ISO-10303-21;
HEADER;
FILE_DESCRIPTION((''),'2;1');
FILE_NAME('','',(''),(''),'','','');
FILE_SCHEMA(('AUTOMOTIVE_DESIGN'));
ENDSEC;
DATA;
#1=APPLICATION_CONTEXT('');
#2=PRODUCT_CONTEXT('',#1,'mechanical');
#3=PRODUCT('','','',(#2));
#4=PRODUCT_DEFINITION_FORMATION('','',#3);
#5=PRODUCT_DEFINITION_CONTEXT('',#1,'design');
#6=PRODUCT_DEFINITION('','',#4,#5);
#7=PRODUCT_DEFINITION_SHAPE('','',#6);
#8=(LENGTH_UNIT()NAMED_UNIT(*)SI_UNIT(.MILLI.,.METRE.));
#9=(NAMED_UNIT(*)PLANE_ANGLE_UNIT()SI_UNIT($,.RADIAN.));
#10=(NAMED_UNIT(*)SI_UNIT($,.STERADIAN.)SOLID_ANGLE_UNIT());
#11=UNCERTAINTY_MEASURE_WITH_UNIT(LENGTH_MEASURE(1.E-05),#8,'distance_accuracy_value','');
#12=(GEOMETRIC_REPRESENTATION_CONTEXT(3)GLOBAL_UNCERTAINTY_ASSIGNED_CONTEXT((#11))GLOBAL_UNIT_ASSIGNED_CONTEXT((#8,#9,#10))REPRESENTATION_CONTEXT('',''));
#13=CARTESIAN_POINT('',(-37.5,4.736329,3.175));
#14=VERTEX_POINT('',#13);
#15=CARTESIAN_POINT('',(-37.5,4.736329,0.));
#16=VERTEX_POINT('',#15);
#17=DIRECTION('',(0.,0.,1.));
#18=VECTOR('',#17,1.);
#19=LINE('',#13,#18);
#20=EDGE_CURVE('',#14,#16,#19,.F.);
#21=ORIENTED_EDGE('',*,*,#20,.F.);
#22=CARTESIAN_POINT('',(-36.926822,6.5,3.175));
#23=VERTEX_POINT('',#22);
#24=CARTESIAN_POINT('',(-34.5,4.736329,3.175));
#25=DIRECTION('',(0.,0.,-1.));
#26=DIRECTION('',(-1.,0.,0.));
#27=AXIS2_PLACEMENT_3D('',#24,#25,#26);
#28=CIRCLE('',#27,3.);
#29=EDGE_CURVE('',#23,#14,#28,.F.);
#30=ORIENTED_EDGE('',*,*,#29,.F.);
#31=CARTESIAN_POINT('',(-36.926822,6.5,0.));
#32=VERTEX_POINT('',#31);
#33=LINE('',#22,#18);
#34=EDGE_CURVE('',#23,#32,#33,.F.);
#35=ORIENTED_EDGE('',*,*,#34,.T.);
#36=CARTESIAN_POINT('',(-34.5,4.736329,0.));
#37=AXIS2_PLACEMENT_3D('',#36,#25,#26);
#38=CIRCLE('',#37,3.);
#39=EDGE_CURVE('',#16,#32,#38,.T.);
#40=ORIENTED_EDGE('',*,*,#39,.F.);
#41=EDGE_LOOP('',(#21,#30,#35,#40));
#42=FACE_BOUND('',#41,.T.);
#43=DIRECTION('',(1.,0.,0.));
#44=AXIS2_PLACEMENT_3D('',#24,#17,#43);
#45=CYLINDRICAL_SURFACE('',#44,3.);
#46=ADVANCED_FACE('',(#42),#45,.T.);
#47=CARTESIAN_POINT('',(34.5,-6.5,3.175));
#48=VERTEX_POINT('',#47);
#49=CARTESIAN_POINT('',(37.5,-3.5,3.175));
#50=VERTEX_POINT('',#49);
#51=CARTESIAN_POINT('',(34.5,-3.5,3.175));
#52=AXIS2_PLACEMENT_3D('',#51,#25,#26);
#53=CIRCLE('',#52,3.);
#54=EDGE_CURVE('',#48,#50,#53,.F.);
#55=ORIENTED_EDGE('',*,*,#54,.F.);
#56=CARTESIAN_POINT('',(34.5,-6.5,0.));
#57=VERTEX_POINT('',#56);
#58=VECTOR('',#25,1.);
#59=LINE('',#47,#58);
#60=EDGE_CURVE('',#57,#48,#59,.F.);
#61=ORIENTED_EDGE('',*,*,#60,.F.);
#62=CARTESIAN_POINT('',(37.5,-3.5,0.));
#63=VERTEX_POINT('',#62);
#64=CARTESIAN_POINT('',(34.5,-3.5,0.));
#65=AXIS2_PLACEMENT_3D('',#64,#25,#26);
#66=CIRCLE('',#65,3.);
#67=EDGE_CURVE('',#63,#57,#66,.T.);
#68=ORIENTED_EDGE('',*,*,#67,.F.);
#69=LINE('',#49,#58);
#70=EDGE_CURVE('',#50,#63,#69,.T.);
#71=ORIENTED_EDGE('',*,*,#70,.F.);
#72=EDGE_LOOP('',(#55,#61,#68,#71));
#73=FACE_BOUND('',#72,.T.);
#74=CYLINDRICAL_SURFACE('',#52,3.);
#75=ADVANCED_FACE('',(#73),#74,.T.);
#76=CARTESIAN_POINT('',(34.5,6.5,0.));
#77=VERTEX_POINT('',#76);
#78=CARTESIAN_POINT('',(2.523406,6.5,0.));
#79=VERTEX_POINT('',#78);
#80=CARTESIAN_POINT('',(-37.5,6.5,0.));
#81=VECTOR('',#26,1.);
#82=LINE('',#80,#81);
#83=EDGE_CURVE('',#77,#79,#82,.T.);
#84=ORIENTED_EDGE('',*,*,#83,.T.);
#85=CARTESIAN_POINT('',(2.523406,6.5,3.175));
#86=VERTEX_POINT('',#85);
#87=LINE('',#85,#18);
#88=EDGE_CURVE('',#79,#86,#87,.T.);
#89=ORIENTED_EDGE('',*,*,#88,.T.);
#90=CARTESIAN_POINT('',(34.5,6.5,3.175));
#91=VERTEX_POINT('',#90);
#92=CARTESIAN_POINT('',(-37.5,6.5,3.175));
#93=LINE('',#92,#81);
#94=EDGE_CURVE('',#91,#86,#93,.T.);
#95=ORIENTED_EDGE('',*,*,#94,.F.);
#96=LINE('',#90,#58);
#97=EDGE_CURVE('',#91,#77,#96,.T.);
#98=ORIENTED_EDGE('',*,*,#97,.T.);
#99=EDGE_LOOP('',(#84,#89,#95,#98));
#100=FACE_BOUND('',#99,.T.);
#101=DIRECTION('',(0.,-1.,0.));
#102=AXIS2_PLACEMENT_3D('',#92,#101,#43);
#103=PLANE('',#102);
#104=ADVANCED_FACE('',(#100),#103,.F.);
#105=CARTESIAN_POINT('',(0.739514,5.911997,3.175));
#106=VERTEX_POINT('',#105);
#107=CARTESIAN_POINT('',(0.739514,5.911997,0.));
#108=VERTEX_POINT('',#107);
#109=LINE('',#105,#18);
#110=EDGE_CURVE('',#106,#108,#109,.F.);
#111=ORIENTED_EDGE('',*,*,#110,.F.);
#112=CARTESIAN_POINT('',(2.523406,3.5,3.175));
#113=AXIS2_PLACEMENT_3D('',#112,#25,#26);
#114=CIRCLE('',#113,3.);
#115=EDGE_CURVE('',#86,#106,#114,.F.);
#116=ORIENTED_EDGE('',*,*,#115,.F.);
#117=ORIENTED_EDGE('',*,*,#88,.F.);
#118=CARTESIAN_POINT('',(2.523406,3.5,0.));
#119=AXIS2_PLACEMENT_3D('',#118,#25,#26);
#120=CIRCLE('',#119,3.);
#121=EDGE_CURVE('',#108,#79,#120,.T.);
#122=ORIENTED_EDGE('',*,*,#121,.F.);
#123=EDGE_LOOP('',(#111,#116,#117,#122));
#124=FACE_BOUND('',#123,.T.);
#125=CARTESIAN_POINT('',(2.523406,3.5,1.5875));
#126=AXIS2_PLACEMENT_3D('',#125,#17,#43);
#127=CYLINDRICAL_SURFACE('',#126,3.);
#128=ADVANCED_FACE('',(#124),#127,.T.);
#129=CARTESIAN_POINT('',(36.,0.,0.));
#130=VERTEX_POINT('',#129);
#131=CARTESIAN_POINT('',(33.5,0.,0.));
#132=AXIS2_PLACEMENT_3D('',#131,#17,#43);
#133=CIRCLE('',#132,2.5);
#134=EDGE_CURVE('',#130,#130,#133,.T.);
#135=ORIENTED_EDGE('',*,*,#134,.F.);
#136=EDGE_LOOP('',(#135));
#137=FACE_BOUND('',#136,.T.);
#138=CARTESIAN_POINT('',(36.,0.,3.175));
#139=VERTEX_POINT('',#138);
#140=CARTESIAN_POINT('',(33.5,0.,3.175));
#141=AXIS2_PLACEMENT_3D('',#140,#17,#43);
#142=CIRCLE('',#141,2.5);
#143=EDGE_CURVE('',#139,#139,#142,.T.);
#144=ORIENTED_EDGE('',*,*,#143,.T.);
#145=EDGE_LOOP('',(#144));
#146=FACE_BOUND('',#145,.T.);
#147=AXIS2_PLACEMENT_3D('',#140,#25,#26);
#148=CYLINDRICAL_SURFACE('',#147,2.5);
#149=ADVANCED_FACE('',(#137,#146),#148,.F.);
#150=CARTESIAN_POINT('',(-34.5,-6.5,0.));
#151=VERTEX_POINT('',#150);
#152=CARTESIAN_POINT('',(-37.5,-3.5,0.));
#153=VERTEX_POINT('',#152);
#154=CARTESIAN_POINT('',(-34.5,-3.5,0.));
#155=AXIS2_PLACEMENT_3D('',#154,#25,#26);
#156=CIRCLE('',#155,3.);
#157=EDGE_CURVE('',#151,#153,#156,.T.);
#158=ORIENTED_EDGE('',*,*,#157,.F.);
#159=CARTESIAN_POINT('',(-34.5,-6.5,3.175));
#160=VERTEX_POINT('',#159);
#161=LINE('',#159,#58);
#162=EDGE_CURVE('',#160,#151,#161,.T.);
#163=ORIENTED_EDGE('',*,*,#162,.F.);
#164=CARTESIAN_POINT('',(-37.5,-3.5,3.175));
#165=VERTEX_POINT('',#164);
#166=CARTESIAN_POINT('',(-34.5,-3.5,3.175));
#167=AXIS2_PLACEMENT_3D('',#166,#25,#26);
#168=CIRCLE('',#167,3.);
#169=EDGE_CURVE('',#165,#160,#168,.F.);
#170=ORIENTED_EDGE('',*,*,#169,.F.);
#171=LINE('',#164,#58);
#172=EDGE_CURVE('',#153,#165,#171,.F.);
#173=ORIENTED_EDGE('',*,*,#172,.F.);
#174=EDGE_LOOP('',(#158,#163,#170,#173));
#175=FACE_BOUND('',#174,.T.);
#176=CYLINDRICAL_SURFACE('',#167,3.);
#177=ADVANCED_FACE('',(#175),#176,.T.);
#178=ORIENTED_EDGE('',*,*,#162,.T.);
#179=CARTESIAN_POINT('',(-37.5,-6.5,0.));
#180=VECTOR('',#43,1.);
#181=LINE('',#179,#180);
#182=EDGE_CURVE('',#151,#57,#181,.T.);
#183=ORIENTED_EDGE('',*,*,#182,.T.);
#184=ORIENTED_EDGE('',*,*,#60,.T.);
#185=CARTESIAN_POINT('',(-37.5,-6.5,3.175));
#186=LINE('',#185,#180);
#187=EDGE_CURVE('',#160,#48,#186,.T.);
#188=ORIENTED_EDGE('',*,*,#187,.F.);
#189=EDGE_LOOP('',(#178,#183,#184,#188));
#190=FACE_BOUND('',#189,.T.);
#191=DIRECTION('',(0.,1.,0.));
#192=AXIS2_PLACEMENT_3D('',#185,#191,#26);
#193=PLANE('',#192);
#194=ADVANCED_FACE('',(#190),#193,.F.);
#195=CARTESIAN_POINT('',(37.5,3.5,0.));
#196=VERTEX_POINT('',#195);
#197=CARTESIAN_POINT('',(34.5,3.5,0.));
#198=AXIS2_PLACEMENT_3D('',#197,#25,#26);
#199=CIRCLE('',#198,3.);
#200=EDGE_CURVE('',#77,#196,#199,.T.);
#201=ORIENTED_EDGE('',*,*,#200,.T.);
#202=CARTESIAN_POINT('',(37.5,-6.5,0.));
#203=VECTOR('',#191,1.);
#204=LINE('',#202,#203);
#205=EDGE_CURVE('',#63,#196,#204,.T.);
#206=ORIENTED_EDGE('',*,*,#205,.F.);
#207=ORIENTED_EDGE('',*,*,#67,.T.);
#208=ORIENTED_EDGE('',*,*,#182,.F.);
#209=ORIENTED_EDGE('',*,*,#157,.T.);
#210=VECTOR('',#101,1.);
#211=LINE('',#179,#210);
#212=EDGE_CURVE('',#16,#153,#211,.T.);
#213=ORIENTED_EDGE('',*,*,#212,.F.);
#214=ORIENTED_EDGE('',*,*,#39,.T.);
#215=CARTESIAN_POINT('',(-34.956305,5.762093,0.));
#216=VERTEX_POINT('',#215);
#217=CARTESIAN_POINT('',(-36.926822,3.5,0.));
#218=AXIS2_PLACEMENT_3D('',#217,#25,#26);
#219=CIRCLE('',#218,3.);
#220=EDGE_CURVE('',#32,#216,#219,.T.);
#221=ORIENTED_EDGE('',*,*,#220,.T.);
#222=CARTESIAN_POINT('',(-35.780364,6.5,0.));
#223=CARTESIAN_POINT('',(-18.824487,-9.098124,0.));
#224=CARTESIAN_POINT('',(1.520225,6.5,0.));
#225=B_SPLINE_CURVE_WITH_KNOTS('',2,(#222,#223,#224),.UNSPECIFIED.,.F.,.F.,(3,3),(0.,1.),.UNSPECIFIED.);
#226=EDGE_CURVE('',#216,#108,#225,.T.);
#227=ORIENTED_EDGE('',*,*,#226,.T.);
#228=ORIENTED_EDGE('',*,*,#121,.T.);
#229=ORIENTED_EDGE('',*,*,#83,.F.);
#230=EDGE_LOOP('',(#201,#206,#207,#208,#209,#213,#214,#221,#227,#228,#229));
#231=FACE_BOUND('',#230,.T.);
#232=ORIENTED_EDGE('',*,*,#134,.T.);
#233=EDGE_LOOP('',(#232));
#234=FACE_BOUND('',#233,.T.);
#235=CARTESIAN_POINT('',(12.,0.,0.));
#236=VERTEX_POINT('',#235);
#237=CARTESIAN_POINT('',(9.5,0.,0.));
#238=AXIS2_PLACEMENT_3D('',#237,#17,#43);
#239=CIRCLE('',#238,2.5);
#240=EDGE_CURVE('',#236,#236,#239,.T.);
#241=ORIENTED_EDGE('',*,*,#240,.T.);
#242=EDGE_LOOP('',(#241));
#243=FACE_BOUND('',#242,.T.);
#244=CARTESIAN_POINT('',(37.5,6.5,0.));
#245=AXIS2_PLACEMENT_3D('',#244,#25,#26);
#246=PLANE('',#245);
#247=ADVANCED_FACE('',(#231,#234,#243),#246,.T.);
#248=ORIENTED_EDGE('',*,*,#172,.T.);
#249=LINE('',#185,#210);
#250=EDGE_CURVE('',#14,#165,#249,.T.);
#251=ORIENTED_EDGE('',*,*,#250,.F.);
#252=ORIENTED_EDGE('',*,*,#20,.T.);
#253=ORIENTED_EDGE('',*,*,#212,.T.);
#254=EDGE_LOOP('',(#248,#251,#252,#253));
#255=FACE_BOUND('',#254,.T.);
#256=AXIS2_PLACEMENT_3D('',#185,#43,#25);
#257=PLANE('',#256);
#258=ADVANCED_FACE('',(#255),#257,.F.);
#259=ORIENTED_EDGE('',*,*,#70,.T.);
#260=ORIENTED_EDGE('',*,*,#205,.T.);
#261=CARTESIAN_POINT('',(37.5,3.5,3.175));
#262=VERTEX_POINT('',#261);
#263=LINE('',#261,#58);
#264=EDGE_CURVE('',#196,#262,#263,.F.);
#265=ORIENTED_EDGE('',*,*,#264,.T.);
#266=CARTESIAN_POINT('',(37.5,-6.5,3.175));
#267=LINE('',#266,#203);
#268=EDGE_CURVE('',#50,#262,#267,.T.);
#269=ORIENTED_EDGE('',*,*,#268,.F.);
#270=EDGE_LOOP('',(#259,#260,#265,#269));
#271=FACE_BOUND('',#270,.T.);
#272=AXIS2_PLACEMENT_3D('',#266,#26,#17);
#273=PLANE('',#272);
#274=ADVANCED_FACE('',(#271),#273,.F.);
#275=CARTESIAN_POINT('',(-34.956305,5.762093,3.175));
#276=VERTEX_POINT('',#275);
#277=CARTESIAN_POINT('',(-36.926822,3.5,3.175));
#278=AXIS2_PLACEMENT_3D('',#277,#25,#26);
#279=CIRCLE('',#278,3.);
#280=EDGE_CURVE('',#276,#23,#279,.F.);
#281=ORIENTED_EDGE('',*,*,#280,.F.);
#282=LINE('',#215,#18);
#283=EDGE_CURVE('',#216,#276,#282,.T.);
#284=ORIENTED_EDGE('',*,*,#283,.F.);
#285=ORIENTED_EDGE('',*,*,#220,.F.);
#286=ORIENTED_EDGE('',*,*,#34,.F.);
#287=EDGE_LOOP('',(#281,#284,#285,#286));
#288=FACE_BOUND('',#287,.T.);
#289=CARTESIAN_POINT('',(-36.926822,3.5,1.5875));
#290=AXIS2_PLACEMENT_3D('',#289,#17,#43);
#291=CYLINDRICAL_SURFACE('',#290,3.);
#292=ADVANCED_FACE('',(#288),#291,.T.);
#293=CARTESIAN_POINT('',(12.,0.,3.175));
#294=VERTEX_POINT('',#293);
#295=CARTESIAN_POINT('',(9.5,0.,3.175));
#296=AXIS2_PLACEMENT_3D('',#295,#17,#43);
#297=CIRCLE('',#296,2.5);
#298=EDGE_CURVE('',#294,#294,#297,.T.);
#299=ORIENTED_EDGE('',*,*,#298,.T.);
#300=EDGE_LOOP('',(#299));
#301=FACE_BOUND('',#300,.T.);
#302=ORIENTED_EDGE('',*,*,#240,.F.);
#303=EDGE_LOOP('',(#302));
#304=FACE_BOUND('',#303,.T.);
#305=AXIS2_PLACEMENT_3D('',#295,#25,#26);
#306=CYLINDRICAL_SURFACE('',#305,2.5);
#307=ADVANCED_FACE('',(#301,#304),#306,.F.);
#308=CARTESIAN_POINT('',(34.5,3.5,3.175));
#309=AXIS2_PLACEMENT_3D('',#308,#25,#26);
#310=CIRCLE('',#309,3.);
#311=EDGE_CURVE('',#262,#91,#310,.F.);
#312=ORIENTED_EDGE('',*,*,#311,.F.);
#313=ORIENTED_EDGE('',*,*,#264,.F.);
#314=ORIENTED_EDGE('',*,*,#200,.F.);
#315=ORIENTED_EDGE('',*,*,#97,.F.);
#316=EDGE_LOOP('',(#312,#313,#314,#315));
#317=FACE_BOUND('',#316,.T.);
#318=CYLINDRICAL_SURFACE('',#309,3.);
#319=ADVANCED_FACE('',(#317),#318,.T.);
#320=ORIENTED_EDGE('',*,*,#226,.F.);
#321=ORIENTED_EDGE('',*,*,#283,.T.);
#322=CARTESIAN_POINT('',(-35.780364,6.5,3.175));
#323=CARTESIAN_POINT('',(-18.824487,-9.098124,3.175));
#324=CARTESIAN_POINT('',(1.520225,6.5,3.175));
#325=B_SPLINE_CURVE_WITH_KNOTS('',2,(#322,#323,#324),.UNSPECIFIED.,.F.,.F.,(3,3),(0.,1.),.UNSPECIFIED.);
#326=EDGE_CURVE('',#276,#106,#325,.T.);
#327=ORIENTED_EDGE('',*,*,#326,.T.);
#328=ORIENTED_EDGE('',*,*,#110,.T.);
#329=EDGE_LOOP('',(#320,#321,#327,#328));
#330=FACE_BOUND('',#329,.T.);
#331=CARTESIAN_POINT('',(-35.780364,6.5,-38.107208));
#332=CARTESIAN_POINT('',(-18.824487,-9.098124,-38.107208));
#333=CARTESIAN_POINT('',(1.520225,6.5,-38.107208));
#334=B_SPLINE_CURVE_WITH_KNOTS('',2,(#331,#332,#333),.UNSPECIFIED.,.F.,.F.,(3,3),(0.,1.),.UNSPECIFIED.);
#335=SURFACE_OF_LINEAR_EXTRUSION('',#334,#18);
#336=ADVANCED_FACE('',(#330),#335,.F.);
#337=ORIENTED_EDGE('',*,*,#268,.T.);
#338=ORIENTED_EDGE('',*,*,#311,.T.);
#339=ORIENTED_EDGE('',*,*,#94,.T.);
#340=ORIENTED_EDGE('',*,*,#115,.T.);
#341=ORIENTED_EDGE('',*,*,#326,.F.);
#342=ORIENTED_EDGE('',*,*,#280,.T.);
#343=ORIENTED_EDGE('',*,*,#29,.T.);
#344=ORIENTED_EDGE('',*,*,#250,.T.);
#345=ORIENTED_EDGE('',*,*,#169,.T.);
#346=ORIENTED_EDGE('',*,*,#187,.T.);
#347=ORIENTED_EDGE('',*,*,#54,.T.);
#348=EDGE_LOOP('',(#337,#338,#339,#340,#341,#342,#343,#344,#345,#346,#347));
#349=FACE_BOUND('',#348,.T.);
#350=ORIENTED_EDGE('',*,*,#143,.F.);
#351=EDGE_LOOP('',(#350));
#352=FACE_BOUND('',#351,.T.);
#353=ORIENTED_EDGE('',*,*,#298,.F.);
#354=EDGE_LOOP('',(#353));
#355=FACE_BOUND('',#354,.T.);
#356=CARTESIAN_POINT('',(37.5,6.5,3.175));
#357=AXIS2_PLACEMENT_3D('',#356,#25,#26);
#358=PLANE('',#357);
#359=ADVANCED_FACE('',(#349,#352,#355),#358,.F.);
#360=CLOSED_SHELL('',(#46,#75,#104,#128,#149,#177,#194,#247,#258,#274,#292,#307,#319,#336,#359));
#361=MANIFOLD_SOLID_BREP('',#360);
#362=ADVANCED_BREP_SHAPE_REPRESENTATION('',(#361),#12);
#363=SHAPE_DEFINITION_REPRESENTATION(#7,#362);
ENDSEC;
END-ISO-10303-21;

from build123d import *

# Parameters (mm, degrees)
SKETCH1_W           = 75
SKETCH1_H           = 13
SKETCH1_R           = 2.5
BOSS_EXTRUDE1_DEPTH = 3.175
CUT_EXTRUDE1_DEPTH  = 3.175
FILLET2_R           = 3
FILLET3_R           = 3


with BuildPart() as part:
    # Sketch1 → Boss-Extrude1 (new body)
    with BuildSketch(Plane.XY):
        Rectangle(SKETCH1_W, SKETCH1_H)
        with Locations((33.5, 0)):
            Circle(SKETCH1_R, mode=Mode.SUBTRACT)
        with Locations((9.5, 0)):
            Circle(SKETCH1_R, mode=Mode.SUBTRACT)
    extrude(amount=BOSS_EXTRUDE1_DEPTH)

    # Sketch3 → Cut-Extrude1 (cut)
    with BuildSketch(Plane.XY.offset(3.175)):
        with BuildLine():
            Line((-35.780363842, 6.5), (1.520225121, 6.5))
            add(Edge.make_bspline(
                [(-35.780363842, 6.5), (-18.824487267, -9.098123968), (1.520225121, 6.5)],
                knots=[0, 0, 0, 1, 1, 1], degree=2))
        make_face()
    extrude(amount=-CUT_EXTRUDE1_DEPTH, mode=Mode.SUBTRACT)

    # Fillet2
    fillet2_edges = [part.edges().sort_by_distance(p)[0] for p in [
        (-35.780363842, 6.5, 1.5875),
        (1.520225121, 6.5, 1.5875),
    ]]
    fillet(fillet2_edges, radius=FILLET2_R)

    # Fillet3
    # the kernel refuses this fillet: 3 mm, written as the material it takes off along each edge
    with BuildSketch(Plane(origin=(37.5, -6.5, -7.5), x_dir=(-1, 0, 0), z_dir=(0, 0, 1)), Plane(origin=(-37.5, -6.5, -7.5), x_dir=(0, 1, 0), z_dir=(0, 0, 1)), Plane(origin=(37.5, 6.5, -7.5), x_dir=(0, -1, 0), z_dir=(0, 0, 1))) as fillet3_piece_1:
        with BuildLine():
            CenterArc((FILLET3_R, -FILLET3_R), FILLET3_R, 90, 90)
            Line((0, -FILLET3_R), (-FILLET3_R * 0.02, -FILLET3_R))
            Line((-FILLET3_R * 0.02, -FILLET3_R), (-FILLET3_R * 0.02, FILLET3_R * 0.02))
            Line((-FILLET3_R * 0.02, FILLET3_R * 0.02), (FILLET3_R, FILLET3_R * 0.02))
            Line((FILLET3_R, FILLET3_R * 0.02), (FILLET3_R, 0))
        make_face()
    extrude(amount=18.175, mode=Mode.SUBTRACT)
    with BuildSketch(Plane(origin=(-37.5, 6.5, -4.409176768), x_dir=(1, 0, 0), z_dir=(0, 0, 1))) as fillet3_piece_2:
        with BuildLine():
            CenterArc((3, -1.763670707), FILLET3_R, 143.992564568, 36.007435432)
            Line((0, -1.763670707), (-0.06, -1.763670707))
            Line((-0.06, -1.763670707), (-0.06, 0))
            Line((-0.06, 0), (0, 0.06))
            ThreePointArc((0, 0.06), (0.286588936, 0.06), (0.52464143, 0.035273414))
            Line((0.52464143, 0.035273414), (0.573177873, 0))
        make_face()
    extrude(amount=11.993353536, mode=Mode.SUBTRACT)


solid = part.part
